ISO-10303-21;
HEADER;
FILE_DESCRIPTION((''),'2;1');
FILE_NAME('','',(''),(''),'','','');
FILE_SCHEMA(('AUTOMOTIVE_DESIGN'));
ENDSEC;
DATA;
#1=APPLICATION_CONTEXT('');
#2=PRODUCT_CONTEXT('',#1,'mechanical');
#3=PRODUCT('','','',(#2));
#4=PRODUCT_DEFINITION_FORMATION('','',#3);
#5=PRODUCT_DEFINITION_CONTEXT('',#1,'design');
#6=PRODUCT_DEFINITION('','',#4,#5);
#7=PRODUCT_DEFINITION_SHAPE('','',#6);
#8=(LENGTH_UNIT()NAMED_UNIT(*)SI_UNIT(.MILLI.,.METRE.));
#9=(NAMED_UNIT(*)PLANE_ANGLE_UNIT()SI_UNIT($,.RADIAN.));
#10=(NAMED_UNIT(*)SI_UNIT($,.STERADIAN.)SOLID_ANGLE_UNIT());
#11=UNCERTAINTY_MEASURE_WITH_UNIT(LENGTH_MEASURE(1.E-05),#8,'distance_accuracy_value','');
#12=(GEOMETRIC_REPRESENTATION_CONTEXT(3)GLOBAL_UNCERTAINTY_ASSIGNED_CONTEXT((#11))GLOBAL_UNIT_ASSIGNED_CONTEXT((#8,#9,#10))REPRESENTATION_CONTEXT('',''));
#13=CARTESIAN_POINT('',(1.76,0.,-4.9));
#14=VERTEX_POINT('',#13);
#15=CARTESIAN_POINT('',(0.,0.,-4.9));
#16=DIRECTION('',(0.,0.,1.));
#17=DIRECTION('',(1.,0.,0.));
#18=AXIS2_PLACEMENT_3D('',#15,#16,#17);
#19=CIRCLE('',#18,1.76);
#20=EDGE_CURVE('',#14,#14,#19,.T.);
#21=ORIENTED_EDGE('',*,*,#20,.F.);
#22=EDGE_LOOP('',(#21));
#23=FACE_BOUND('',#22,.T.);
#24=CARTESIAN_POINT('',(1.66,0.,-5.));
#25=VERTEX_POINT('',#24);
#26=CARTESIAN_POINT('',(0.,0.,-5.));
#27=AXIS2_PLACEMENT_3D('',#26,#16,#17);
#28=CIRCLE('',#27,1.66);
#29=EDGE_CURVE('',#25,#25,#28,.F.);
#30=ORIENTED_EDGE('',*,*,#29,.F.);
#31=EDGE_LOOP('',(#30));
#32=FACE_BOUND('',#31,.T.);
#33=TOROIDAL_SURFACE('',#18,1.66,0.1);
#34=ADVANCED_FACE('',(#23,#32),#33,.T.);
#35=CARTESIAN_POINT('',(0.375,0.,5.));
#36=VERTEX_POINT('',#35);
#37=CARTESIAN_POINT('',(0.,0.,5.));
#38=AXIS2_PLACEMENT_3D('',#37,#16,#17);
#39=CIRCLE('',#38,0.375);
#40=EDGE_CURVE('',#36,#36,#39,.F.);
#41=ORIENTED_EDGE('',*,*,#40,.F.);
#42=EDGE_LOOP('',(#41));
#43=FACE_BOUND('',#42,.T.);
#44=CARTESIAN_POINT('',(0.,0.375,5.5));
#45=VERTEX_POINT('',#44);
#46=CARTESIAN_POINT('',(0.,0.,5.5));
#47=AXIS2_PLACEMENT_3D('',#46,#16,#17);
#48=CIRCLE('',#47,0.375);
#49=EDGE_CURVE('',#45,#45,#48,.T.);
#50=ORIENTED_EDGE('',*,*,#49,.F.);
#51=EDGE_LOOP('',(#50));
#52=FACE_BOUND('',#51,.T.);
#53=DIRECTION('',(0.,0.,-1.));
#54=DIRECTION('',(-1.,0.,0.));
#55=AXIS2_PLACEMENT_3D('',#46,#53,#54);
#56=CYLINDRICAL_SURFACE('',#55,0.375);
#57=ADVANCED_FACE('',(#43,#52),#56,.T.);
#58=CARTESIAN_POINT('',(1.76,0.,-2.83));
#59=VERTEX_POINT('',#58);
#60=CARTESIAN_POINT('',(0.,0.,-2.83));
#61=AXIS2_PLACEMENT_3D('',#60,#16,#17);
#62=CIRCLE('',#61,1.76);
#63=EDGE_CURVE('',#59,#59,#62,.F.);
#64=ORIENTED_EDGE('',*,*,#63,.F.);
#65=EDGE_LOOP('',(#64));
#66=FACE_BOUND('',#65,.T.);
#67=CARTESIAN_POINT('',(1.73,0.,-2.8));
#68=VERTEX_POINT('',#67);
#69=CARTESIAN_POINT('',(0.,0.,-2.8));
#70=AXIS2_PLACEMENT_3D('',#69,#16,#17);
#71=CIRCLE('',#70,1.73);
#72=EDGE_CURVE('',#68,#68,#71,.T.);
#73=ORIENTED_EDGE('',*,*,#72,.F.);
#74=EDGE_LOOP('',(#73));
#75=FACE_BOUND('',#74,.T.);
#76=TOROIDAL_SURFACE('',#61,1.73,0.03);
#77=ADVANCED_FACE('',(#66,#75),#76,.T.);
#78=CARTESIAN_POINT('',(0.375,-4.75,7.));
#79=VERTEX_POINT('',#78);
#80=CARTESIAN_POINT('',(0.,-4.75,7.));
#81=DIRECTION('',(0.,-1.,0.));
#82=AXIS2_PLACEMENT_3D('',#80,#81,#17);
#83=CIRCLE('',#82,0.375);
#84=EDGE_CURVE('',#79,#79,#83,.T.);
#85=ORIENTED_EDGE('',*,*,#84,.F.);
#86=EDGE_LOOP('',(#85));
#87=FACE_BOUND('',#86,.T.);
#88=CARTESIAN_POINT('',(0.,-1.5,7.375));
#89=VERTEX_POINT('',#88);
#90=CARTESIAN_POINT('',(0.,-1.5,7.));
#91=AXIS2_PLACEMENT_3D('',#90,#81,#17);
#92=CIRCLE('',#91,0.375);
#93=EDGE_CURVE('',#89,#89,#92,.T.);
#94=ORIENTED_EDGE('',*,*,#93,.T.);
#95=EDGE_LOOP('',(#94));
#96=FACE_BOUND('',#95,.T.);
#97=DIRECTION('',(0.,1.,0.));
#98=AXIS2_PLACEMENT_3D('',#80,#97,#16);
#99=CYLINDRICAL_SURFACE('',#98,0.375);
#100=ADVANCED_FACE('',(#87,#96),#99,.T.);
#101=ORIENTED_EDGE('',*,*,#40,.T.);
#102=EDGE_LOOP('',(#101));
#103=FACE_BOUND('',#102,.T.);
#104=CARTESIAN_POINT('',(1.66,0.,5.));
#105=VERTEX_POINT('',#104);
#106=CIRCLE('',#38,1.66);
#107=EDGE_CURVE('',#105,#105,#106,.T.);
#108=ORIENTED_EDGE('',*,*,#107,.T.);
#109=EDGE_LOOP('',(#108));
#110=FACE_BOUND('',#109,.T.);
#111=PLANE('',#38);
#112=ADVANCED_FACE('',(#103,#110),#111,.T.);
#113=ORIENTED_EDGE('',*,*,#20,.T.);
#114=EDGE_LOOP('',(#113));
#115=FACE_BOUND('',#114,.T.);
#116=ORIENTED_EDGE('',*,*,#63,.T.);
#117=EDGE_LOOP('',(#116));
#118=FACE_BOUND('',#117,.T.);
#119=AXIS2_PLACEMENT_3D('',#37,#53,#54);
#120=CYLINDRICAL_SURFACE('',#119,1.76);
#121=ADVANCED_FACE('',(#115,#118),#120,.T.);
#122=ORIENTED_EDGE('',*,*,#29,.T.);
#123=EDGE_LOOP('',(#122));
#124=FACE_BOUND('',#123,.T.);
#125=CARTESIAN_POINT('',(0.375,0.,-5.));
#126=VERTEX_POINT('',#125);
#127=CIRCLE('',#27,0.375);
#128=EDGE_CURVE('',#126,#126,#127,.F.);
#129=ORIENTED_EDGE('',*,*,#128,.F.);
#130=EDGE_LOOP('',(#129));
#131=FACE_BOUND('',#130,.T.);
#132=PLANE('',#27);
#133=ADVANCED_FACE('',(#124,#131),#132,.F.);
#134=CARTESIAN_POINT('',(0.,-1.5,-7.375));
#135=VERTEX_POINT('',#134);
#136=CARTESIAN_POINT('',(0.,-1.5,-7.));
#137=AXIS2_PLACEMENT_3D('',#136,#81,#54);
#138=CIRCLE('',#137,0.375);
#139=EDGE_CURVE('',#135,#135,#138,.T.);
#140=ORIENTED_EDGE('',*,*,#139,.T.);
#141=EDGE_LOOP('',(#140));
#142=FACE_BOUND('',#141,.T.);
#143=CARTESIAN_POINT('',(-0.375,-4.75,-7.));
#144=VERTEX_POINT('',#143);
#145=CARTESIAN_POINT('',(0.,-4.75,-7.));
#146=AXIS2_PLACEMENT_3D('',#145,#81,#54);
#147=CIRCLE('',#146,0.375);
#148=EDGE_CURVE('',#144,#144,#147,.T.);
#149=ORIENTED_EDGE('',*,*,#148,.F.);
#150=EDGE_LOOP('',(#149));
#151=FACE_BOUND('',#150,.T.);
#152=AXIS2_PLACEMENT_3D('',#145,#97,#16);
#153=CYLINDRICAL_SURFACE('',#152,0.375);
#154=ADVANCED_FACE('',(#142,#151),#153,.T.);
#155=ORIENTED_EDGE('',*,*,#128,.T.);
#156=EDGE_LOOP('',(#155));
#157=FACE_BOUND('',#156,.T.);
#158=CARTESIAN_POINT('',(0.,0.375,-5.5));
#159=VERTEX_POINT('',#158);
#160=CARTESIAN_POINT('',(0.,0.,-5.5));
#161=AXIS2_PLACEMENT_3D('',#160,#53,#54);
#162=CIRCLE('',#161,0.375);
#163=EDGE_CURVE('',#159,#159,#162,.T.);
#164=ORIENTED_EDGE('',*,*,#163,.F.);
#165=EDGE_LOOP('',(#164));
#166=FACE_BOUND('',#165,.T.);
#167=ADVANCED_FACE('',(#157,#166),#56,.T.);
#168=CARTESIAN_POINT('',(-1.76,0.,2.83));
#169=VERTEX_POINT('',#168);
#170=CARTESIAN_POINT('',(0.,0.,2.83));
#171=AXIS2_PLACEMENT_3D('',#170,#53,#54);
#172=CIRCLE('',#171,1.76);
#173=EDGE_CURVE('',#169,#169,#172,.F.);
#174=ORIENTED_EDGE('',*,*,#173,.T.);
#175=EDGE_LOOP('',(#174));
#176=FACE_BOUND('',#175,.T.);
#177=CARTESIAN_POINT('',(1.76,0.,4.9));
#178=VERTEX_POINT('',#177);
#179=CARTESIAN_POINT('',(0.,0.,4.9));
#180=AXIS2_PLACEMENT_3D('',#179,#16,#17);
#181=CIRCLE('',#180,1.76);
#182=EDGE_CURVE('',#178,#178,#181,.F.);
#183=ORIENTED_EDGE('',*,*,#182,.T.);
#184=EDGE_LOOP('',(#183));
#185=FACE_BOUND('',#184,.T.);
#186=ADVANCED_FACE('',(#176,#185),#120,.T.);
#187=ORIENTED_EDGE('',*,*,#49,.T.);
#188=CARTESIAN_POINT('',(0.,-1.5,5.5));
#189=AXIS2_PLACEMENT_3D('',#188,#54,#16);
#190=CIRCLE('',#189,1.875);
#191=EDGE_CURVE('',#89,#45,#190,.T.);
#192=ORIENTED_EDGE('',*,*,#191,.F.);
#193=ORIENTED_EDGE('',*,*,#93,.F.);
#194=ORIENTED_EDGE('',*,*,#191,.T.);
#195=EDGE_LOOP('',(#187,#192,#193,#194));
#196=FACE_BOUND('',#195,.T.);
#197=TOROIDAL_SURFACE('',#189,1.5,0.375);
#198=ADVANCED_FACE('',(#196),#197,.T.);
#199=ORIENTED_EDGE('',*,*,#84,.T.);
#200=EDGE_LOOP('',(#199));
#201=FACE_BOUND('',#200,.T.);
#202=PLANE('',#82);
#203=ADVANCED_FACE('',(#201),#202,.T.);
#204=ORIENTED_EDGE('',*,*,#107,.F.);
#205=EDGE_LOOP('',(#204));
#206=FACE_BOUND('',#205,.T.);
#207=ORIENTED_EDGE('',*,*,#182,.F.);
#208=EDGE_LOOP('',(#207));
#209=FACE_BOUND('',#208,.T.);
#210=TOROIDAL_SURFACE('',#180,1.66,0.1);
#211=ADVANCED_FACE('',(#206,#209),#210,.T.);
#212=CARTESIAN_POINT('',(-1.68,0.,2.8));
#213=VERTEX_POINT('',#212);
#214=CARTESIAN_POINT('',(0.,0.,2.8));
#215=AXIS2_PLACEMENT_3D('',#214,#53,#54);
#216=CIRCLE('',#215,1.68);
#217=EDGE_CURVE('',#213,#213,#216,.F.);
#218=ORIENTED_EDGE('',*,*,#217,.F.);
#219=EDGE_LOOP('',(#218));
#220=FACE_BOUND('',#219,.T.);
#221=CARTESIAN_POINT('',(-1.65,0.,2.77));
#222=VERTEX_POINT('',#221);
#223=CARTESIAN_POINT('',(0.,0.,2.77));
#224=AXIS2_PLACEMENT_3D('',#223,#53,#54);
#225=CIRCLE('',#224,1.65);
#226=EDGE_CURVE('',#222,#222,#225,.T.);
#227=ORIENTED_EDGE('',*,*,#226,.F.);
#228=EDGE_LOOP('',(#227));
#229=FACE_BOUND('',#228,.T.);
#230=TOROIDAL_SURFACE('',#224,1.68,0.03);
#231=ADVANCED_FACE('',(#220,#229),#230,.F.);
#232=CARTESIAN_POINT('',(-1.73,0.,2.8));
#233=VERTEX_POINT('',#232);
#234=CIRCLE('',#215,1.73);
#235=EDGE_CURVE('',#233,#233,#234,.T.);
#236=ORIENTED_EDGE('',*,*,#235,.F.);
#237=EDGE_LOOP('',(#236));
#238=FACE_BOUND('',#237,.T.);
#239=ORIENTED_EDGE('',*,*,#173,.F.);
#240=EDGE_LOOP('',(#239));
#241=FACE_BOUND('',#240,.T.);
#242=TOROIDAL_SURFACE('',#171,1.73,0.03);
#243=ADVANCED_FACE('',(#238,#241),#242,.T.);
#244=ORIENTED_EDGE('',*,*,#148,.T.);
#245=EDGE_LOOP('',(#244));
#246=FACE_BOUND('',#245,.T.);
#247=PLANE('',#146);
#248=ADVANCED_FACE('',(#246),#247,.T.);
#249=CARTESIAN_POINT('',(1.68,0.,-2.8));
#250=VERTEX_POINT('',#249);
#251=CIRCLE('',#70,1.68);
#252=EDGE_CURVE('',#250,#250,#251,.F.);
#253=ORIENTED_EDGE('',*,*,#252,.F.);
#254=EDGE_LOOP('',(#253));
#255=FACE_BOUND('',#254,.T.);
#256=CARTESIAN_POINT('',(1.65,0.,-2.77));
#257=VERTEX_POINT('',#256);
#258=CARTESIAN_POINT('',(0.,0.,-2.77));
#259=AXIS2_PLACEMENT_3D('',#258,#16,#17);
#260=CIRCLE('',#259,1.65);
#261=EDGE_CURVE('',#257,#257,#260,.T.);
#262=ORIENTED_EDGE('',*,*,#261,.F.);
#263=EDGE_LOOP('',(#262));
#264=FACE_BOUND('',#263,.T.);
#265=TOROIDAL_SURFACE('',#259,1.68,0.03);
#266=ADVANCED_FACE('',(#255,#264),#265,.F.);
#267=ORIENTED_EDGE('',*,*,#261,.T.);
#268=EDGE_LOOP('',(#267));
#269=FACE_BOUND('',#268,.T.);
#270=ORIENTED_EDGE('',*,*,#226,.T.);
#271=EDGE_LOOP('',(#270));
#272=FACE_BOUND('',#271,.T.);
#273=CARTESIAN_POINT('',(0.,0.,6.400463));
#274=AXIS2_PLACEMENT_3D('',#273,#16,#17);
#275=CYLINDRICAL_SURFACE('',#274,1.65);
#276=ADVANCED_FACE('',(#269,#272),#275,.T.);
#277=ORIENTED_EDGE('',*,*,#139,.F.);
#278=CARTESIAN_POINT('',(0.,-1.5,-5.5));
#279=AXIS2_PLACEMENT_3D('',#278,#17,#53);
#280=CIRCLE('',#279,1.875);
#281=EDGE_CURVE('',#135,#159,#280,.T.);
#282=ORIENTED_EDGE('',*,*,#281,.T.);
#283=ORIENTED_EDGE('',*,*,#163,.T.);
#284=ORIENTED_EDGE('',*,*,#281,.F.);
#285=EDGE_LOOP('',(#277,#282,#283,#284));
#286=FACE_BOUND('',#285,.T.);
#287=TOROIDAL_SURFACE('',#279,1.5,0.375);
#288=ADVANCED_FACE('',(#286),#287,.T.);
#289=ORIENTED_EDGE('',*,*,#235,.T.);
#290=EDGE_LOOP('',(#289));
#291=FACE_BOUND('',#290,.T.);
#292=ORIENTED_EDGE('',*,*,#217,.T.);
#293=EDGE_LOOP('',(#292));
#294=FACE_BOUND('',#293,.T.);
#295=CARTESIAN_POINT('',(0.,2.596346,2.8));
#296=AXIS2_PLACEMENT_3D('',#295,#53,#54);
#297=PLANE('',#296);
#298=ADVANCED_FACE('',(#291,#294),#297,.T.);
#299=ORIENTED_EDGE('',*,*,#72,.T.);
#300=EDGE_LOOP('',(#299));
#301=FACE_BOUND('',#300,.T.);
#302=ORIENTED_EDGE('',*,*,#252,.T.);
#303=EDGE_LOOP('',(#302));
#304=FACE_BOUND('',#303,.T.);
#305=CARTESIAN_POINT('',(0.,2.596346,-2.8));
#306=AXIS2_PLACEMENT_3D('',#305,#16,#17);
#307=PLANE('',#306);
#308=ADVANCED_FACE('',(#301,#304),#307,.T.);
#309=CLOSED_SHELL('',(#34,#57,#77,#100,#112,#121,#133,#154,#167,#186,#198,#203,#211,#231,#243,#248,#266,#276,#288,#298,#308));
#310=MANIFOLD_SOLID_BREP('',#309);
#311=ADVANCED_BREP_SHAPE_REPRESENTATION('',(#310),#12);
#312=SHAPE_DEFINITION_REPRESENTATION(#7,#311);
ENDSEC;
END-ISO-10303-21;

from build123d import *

# Parameters (mm, degrees)
SKETCH1_R           = 1.76
BOSS_EXTRUDE1_DEPTH = 5
SKETCH2_W           = 5.6
SKETCH2_H           = 0.946346071
FILLET1_R           = 0.1
FILLET3_R           = 0.03
SKETCH3_R           = 0.375
BOSS_EXTRUDE2_DEPTH = 5.5
SWEEP1_OUTLINE_R    = 0.375
SWEEP1_ANGLE        = 90
SWEEP1_START        = -4.75
SWEEP1_2_OUTLINE_R  = 0.375
SWEEP1_2_DEPTH      = 3.2500001
SWEEP2_OUTLINE_R    = 0.375
SWEEP2_ANGLE        = 90
SWEEP2_START        = -4.75
SWEEP2_2_OUTLINE_R  = 0.375
SWEEP2_2_DEPTH      = 3.2500001


with BuildPart() as part:
    # Sketch1 → Boss-Extrude1 (new, symmetric)
    with BuildSketch(Plane.XY):
        Circle(SKETCH1_R)
    extrude(amount=BOSS_EXTRUDE1_DEPTH, both=True)

    # Sketch2 → Cut-Revolve1 (revolve, cut)
    with BuildSketch(Plane(origin=(0, 0, 0), x_dir=(0, 0, -1), z_dir=(1, 0, 0)), mode=Mode.PRIVATE) as cut_revolve1_sk:
        with Locations((0, 2.123173036)):
            Rectangle(SKETCH2_W, SKETCH2_H)
    revolve(cut_revolve1_sk.sketch.rotate(Axis((0, 0, 6.400463156), (0, 0, -1)), 90), axis=Axis((0, 0, 6.400463156), (0, 0, -1)), mode=Mode.SUBTRACT)

    # Fillet1
    fillet1_edges = [part.edges().sort_by_distance(p)[0] for p in [
        (-1.76, 0, -5),
        (-1.76, 0, 5),
    ]]
    fillet(fillet1_edges, radius=FILLET1_R)

    # Fillet3
    fillet3_edges = [part.edges().sort_by_distance(p)[0] for p in [
        (-1.65, 0, -2.8),
        (-1.76, 0, 2.8),
        (-1.65, 0, 2.8),
        (-1.76, 0, -2.8),
    ]]
    fillet(fillet3_edges, radius=FILLET3_R)

    # Sketch3 → Boss-Extrude2 (add, symmetric)
    with BuildSketch(Plane.XY):
        Circle(SKETCH3_R)
    extrude(amount=BOSS_EXTRUDE2_DEPTH, both=True)

    # Sweep1: read off the stored shape, not the designer's step
    # Sweep1 outline → Sweep1 (revolve)
    with BuildSketch(Plane(origin=(0, -1.5, 5.5), x_dir=(0, 1, 0), z_dir=(0, 0, -1))):
        with Locations((1.5, 0)):
            Circle(SWEEP1_OUTLINE_R)
    revolve(axis=Axis((0, -1.5, 5.5), (1, 0, 0)), revolution_arc=SWEEP1_ANGLE)

    # Sweep1 2 outline → Sweep1 2 (add)
    with BuildSketch(Plane(origin=(0, 0, 0), x_dir=(1, 0, 0), z_dir=(0, 1, 0)).offset(SWEEP1_START)):
        with Locations((0, -7)):
            Circle(SWEEP1_2_OUTLINE_R)
    extrude(amount=SWEEP1_2_DEPTH)

    # Sweep2: read off the stored shape, not the designer's step
    # Sweep2 outline → Sweep2 (revolve)
    with BuildSketch(Plane(origin=(0, -1.5, -5.5), x_dir=(0, 0, -1), z_dir=(0, -1, 0))):
        with Locations((1.5, 0)):
            Circle(SWEEP2_OUTLINE_R)
    revolve(axis=Axis((0, -1.5, -5.5), (1, 0, 0)), revolution_arc=SWEEP2_ANGLE)

    # Sweep2 2 outline → Sweep2 2 (add)
    with BuildSketch(Plane(origin=(0, 0, 0), x_dir=(1, 0, 0), z_dir=(0, 1, 0)).offset(SWEEP2_START)):
        with Locations((0, 7)):
            Circle(SWEEP2_2_OUTLINE_R)
    extrude(amount=SWEEP2_2_DEPTH)


solid = part.part
